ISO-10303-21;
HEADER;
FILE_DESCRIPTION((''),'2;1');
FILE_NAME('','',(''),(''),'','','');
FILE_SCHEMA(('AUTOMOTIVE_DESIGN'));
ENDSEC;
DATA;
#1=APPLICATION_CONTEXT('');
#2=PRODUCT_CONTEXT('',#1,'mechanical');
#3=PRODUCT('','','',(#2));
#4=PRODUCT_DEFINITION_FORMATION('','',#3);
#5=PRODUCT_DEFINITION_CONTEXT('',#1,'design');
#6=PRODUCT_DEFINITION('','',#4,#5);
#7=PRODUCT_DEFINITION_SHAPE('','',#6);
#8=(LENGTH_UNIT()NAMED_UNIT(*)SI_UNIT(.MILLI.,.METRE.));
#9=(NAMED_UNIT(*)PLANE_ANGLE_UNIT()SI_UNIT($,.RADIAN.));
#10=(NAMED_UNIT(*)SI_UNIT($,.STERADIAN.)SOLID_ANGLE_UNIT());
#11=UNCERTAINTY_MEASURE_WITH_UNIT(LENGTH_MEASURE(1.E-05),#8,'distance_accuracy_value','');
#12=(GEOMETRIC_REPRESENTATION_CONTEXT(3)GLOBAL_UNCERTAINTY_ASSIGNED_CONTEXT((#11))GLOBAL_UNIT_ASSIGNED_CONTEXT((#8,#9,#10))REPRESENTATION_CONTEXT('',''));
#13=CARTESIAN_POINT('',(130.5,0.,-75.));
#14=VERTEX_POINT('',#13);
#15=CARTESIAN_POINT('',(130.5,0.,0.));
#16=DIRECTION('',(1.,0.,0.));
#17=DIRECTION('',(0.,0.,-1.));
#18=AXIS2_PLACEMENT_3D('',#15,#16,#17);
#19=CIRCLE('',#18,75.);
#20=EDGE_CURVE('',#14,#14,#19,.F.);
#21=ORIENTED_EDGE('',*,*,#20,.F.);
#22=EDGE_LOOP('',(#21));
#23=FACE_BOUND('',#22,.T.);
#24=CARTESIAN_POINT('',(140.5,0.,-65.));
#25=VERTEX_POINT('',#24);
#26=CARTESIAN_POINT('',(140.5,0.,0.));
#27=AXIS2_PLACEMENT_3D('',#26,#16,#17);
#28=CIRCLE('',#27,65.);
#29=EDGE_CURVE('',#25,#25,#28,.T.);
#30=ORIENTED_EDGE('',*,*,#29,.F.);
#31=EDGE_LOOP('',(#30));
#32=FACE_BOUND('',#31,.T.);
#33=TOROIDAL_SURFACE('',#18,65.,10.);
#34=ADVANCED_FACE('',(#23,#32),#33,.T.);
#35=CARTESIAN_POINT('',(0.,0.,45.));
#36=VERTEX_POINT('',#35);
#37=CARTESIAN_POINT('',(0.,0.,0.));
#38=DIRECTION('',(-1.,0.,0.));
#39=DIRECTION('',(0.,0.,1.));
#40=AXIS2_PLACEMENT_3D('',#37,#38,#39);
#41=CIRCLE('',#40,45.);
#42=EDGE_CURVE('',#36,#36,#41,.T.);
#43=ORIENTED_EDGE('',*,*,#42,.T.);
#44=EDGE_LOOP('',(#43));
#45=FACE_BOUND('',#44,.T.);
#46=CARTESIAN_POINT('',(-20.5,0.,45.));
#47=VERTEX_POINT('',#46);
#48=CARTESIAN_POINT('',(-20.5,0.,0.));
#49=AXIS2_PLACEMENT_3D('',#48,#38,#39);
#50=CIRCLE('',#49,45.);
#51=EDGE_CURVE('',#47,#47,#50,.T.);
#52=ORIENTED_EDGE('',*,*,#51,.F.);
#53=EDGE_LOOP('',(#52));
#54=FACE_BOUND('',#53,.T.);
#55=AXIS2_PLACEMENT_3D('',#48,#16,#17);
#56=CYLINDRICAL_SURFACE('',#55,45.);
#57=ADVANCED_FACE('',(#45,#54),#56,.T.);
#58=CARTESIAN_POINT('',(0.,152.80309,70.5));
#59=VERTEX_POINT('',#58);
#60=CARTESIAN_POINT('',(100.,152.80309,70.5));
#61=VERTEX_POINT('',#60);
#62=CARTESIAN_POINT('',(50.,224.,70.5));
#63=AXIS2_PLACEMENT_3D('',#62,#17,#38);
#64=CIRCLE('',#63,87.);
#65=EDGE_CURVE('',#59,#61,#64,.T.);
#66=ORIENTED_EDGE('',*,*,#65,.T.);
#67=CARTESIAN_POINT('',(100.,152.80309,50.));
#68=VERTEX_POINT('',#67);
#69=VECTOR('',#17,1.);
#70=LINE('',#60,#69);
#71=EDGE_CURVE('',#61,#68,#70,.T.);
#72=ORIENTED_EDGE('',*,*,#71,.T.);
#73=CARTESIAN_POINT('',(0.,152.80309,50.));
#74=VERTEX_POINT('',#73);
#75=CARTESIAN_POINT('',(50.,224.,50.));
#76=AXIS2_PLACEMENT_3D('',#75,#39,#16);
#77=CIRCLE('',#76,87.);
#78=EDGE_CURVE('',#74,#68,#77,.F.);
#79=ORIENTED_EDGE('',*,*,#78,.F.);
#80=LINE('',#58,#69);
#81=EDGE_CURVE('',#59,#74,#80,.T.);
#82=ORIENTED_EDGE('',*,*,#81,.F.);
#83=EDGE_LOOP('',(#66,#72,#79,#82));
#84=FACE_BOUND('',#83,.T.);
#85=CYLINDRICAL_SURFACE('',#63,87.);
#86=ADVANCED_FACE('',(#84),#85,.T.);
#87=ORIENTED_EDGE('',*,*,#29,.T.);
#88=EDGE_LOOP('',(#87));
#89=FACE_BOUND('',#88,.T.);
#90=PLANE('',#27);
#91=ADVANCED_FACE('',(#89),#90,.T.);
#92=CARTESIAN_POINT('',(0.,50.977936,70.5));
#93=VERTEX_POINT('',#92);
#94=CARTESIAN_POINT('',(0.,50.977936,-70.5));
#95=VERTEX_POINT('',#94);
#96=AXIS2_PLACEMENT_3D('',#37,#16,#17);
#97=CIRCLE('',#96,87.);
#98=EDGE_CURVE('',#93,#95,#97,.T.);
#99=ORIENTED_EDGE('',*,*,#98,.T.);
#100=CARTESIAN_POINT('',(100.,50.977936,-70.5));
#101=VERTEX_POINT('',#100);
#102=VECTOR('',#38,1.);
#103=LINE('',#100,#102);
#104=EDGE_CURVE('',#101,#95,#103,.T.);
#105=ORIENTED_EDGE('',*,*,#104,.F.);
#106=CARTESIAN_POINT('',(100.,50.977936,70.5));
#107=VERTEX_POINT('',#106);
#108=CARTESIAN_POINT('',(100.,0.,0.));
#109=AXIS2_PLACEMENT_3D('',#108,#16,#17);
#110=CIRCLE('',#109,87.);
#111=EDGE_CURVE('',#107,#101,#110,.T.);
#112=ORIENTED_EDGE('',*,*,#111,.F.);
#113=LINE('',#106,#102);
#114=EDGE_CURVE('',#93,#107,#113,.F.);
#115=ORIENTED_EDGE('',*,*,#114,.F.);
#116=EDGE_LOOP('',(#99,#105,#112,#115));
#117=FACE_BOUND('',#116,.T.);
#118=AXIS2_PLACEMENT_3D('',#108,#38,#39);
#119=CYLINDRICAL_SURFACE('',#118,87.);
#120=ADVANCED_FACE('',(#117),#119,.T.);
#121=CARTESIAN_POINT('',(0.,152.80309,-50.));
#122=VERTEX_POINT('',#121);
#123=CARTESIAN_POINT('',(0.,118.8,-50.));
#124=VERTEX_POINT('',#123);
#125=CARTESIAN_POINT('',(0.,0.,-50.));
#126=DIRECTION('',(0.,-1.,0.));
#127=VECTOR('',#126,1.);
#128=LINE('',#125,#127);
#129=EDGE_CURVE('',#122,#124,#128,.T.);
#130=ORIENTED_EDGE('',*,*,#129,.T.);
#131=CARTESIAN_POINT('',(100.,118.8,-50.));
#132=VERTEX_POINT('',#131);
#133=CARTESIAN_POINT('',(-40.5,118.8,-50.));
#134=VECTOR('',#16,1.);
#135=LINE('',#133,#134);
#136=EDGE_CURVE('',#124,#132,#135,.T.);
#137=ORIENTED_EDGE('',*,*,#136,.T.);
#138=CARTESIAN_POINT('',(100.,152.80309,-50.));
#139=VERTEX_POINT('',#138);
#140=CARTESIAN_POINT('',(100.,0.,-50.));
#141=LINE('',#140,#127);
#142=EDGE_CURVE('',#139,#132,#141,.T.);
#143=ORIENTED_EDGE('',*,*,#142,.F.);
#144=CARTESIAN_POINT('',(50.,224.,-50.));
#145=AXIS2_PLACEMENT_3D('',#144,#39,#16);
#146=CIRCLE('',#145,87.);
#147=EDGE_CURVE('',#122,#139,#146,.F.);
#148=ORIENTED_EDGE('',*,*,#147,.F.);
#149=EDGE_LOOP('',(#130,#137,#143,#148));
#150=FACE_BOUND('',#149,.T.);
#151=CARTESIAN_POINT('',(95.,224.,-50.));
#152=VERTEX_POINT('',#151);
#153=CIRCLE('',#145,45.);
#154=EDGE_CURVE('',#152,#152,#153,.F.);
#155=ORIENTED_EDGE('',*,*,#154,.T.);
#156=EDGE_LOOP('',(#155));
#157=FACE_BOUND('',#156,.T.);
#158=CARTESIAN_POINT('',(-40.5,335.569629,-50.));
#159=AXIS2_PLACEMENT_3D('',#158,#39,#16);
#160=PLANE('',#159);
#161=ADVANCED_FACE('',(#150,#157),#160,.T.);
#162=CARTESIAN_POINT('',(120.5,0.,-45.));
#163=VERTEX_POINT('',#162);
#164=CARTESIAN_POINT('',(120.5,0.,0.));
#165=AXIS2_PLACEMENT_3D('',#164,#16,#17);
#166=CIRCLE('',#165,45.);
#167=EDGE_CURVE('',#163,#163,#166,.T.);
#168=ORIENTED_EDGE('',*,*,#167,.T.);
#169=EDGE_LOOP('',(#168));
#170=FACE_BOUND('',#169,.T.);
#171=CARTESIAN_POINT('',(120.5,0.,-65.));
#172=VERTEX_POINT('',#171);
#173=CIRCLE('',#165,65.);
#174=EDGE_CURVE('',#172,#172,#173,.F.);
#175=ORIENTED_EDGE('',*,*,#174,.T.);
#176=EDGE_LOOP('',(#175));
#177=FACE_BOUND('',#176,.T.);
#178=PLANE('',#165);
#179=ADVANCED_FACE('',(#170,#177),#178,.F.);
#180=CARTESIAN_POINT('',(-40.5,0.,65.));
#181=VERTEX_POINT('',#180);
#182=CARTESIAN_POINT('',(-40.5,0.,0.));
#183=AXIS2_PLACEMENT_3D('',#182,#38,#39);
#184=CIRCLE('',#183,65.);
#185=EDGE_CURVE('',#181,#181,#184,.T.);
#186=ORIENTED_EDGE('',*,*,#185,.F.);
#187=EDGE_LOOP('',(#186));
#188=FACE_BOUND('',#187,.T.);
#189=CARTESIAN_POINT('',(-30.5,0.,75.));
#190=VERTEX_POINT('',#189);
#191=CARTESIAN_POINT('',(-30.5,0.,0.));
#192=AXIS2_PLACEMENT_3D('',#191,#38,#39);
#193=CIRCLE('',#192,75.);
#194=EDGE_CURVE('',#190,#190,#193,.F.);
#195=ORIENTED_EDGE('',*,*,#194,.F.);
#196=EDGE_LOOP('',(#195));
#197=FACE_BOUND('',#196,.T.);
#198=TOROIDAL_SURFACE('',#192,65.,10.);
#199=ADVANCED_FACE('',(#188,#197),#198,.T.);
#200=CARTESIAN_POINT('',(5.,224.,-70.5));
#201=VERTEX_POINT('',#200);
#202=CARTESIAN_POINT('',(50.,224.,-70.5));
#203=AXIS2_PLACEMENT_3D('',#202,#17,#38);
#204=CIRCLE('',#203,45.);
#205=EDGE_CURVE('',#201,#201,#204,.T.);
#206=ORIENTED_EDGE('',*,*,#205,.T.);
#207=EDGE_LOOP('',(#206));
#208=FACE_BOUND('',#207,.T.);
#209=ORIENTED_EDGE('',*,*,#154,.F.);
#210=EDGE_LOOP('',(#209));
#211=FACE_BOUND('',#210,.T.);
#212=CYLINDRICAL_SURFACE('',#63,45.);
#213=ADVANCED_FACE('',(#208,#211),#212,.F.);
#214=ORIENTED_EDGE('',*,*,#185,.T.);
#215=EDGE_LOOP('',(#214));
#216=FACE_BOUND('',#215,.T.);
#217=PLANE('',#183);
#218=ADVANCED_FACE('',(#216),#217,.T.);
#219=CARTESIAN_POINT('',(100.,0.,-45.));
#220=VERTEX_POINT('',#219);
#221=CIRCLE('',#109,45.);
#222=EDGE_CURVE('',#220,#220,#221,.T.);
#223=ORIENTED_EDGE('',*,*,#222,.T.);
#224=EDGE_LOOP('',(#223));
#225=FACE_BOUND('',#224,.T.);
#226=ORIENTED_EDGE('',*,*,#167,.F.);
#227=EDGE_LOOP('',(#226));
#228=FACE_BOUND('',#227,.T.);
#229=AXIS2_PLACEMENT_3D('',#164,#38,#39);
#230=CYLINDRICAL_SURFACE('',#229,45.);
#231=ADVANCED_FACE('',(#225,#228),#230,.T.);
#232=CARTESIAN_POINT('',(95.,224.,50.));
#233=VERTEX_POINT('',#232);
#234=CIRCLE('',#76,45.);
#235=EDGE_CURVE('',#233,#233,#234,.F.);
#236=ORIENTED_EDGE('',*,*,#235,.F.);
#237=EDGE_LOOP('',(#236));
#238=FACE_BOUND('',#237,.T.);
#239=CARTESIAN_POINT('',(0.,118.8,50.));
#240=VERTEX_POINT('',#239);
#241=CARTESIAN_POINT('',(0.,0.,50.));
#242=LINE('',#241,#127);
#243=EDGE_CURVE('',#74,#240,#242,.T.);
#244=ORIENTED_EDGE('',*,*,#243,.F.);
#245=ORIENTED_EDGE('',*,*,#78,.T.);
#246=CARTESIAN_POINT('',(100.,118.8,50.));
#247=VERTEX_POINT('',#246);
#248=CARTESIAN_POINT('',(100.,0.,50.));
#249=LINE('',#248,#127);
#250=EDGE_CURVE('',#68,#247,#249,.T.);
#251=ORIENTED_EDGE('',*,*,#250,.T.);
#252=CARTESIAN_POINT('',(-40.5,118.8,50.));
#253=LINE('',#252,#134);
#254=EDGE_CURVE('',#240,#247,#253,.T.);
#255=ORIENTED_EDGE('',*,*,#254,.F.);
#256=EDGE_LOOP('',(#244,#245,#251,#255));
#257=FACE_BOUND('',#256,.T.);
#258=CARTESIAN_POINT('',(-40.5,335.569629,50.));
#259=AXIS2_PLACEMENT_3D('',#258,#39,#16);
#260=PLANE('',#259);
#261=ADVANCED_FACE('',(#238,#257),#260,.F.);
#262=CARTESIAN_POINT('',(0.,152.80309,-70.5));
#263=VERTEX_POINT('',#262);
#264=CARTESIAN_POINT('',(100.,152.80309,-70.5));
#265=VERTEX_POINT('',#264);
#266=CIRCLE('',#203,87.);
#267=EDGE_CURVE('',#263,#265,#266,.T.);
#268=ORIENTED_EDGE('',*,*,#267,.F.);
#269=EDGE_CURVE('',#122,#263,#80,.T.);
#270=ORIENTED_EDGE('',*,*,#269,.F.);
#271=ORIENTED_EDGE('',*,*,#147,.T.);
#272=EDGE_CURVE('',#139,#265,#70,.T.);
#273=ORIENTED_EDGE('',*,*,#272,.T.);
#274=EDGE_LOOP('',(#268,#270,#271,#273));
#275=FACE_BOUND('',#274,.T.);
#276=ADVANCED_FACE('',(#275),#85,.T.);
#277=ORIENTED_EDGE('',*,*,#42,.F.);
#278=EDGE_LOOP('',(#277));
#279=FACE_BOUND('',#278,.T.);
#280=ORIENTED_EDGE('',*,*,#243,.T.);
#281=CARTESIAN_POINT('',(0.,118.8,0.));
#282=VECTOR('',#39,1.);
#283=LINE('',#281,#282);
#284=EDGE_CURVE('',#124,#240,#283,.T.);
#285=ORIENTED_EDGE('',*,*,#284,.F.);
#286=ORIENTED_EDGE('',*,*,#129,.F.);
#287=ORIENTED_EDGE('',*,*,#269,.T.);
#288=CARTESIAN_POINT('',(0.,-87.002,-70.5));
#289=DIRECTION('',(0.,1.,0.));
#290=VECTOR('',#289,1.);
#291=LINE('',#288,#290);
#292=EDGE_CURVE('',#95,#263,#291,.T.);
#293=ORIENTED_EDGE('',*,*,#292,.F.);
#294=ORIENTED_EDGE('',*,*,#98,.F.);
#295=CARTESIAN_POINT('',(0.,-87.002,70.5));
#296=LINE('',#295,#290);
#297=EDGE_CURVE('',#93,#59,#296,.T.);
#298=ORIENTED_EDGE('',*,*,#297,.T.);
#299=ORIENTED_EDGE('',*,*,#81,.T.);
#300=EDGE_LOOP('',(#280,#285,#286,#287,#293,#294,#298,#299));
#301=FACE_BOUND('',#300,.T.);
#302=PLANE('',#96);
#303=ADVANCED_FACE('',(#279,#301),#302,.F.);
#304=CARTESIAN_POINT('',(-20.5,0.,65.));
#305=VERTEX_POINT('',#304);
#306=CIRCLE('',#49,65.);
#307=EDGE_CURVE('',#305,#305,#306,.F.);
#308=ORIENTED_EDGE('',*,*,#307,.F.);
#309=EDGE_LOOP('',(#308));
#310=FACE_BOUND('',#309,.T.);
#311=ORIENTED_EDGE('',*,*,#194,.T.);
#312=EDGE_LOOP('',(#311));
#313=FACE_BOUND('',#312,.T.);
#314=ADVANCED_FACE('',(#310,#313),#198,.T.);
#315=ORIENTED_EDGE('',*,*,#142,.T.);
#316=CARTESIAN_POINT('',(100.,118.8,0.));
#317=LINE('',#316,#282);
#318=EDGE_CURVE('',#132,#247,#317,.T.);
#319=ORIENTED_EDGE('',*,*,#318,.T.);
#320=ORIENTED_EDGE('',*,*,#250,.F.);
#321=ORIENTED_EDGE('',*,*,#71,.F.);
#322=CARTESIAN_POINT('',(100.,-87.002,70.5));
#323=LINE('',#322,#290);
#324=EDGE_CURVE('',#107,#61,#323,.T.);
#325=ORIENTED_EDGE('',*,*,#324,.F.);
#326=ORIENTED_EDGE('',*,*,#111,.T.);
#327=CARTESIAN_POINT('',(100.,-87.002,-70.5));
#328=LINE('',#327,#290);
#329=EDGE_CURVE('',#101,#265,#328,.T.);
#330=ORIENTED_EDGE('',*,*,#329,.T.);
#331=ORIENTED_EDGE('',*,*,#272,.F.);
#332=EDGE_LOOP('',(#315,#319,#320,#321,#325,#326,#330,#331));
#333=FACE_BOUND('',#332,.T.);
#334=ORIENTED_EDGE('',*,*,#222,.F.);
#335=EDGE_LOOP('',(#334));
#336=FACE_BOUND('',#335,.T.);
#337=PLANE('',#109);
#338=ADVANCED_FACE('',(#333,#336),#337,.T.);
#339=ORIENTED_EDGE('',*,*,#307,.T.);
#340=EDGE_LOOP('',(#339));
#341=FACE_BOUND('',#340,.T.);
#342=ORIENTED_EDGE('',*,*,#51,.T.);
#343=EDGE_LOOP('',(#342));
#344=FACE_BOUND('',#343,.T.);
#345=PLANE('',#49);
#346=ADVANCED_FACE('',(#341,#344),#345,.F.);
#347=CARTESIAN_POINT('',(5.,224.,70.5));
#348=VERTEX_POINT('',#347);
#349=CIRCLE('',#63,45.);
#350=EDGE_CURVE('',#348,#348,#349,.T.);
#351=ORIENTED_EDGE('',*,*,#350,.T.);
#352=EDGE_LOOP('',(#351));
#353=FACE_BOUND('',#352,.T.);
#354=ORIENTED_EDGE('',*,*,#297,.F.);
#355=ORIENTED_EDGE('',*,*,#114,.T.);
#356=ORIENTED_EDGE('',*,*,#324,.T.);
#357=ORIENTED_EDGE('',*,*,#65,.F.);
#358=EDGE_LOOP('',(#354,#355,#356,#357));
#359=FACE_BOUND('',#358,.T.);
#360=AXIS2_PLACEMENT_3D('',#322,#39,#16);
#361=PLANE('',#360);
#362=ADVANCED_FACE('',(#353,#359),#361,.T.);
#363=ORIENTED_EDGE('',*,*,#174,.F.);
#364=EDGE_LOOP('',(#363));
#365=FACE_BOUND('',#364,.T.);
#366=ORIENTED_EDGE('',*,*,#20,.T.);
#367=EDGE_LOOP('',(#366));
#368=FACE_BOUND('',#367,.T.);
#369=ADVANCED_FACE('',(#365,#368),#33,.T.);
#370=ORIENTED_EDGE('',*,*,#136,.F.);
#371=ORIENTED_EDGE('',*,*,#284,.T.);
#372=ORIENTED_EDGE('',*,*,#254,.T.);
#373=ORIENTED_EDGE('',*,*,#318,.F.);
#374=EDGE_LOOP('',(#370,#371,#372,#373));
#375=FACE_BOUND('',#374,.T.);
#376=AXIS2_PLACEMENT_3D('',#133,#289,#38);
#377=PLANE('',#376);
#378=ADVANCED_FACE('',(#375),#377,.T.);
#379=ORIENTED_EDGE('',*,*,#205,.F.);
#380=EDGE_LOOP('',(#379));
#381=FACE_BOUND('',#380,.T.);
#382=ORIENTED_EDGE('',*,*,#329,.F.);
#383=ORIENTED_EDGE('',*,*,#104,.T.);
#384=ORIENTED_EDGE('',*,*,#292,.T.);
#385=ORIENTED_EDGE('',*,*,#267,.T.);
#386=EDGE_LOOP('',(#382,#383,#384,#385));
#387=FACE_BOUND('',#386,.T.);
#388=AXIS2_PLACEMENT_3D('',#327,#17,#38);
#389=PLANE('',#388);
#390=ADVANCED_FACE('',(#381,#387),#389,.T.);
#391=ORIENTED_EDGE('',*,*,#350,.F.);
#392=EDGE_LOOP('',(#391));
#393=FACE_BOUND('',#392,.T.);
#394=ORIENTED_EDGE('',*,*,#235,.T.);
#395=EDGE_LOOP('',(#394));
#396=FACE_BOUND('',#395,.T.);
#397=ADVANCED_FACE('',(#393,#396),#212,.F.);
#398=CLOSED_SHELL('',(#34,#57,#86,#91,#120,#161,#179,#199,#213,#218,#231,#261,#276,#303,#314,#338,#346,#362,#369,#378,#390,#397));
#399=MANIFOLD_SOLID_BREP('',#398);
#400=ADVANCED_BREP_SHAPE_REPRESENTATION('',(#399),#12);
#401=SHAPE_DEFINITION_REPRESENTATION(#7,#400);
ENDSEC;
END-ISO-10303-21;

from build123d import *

# Parameters (mm, degrees)
SKETCH1_R                = 87
BOSS_EXTRUDE3_DEPTH      = 100
SKETCH2_R                = 45
BOSS_EXTRUDE4_DEPTH      = 20.5
SKETCH3_R                = 75
BOSS_EXTRUDE5_DEPTH      = 20
FILLET1_R                = 10
BOSS_EXTRUDE6_START      = 20.5
SKETCH4_R                = 45
BOSS_EXTRUDE6_DEPTH      = 20.5
BOSS_EXTRUDE7_START      = 20
SKETCH5_R                = 75
BOSS_EXTRUDE7_DEPTH      = 20
FILLET2_R                = 10
BOSS_EXTRUDE8_REACH      = 241.969
BOSS_EXTRUDE8_END_RADIUS = 87
SKETCH6_W                = 100
SKETCH6_H                = 141
SKETCH9_R                = 45
BOSS_EXTRUDE10_DEPTH     = 141
CUT_EXTRUDE2_DEPTH       = 374.425025993
CUT_EXTRUDE2_DEPTH_BACK  = 374.425025993
SKETCH21_W               = 216.769628827
SKETCH21_H               = 100


with BuildPart() as part:
    # Sketch1 → Boss-Extrude3 (new body)
    with BuildSketch(Plane(origin=(0, 0, 0), x_dir=(0, 0, -1), z_dir=(1, 0, 0))):
        Circle(SKETCH1_R)
    extrude(amount=BOSS_EXTRUDE3_DEPTH)

    # Sketch2 → Boss-Extrude4 (add)
    with BuildSketch(Plane(origin=(100, 0, 0), x_dir=(0, 0, -1), z_dir=(1, 0, 0))):
        Circle(SKETCH2_R)
    extrude(amount=BOSS_EXTRUDE4_DEPTH)

    # Sketch3 → Boss-Extrude5 (add)
    with BuildSketch(Plane(origin=(120.5, 0, 0), x_dir=(0, 0, -1), z_dir=(1, 0, 0))):
        Circle(SKETCH3_R)
    extrude(amount=BOSS_EXTRUDE5_DEPTH)

    # Fillet1
    fillet1_edges = [part.edges().sort_by_distance(p)[0] for p in [
        (140.5, 0, 75),
        (120.5, 0, 75),
    ]]
    fillet(fillet1_edges, radius=FILLET1_R - 0.0001)  # a hair under: the kernel refuses the full size

    # Sketch4 → Boss-Extrude6 (add)
    with BuildSketch(Plane.ZY.offset(BOSS_EXTRUDE6_START)):
        with Locations(Location((0, 0, 0), (0, 0, 180))):
            Circle(SKETCH4_R)
    extrude(amount=-BOSS_EXTRUDE6_DEPTH)

    # Sketch5 → Boss-Extrude7 (add)
    with BuildSketch(Plane.ZY.offset(20.5).offset(BOSS_EXTRUDE7_START)):
        Circle(SKETCH5_R)
    extrude(amount=-BOSS_EXTRUDE7_DEPTH)

    # Fillet2
    fillet2_edges = [part.edges().sort_by_distance(p)[0] for p in [
        (-20.5, 0, -75),
        (-40.5, 0, -75),
    ]]
    fillet(fillet2_edges, radius=FILLET2_R - 0.0001)  # a hair under: the kernel refuses the full size

    # Boss-Extrude8: up to this cylinder (the profile starts outside it)
    boss_extrude8_end = Plane(origin=(50, 0, 0), z_dir=(-1, 0, 0)) * Cylinder(BOSS_EXTRUDE8_END_RADIUS, 658.938, mode=Mode.PRIVATE)
    # Sketch6 → Boss-Extrude8 (add, up to the surface)
    with BuildSketch(Plane(origin=(0, 87, 0), x_dir=(1, 0, 0), z_dir=(0, 1, 0)), mode=Mode.PRIVATE) as boss_extrude8_sk1:
        with Locations((50, 0)):
            Rectangle(SKETCH6_W, SKETCH6_H)
    boss_extrude8_tool1 = extrude(boss_extrude8_sk1.sketch, amount=-BOSS_EXTRUDE8_REACH, mode=Mode.PRIVATE) - boss_extrude8_end
    add(boss_extrude8_tool1.solids().sort_by_distance((50, 87, 0))[0])
    add(boss_extrude8_tool1.solids().sort_by_distance((50, 87, 0))[1])

    # Sketch9 → Boss-Extrude10 (add)
    with BuildSketch(Plane(origin=(0, 0, -70.5), x_dir=(-1, 0, 0), z_dir=(0, 0, -1))):
        with BuildLine():
            Line((-100, 87), (0, 87))
            Line((0, 87), (0, 152.803089955))
            ThreePointArc((0, 152.803089955), (-50, 311), (-100, 152.803089955))
            Line((-100, 152.803089955), (-100, 87))
        make_face()
        with Locations((-50, 224)):
            Circle(SKETCH9_R, mode=Mode.SUBTRACT)
    extrude(amount=-BOSS_EXTRUDE10_DEPTH)

    # Sketch21 → Cut-Extrude2 (cut, two sides: drawn at the far end of the back side and taken through both)
    with BuildSketch(Plane(origin=(147, 0, 0), x_dir=(0, 1, 0), z_dir=(-1, 0, 0)).offset(-CUT_EXTRUDE2_DEPTH_BACK)):
        with Locations((227.184814414, 0)):
            Rectangle(SKETCH21_W, SKETCH21_H)
    extrude(amount=CUT_EXTRUDE2_DEPTH + CUT_EXTRUDE2_DEPTH_BACK, mode=Mode.SUBTRACT)


solid = part.part
